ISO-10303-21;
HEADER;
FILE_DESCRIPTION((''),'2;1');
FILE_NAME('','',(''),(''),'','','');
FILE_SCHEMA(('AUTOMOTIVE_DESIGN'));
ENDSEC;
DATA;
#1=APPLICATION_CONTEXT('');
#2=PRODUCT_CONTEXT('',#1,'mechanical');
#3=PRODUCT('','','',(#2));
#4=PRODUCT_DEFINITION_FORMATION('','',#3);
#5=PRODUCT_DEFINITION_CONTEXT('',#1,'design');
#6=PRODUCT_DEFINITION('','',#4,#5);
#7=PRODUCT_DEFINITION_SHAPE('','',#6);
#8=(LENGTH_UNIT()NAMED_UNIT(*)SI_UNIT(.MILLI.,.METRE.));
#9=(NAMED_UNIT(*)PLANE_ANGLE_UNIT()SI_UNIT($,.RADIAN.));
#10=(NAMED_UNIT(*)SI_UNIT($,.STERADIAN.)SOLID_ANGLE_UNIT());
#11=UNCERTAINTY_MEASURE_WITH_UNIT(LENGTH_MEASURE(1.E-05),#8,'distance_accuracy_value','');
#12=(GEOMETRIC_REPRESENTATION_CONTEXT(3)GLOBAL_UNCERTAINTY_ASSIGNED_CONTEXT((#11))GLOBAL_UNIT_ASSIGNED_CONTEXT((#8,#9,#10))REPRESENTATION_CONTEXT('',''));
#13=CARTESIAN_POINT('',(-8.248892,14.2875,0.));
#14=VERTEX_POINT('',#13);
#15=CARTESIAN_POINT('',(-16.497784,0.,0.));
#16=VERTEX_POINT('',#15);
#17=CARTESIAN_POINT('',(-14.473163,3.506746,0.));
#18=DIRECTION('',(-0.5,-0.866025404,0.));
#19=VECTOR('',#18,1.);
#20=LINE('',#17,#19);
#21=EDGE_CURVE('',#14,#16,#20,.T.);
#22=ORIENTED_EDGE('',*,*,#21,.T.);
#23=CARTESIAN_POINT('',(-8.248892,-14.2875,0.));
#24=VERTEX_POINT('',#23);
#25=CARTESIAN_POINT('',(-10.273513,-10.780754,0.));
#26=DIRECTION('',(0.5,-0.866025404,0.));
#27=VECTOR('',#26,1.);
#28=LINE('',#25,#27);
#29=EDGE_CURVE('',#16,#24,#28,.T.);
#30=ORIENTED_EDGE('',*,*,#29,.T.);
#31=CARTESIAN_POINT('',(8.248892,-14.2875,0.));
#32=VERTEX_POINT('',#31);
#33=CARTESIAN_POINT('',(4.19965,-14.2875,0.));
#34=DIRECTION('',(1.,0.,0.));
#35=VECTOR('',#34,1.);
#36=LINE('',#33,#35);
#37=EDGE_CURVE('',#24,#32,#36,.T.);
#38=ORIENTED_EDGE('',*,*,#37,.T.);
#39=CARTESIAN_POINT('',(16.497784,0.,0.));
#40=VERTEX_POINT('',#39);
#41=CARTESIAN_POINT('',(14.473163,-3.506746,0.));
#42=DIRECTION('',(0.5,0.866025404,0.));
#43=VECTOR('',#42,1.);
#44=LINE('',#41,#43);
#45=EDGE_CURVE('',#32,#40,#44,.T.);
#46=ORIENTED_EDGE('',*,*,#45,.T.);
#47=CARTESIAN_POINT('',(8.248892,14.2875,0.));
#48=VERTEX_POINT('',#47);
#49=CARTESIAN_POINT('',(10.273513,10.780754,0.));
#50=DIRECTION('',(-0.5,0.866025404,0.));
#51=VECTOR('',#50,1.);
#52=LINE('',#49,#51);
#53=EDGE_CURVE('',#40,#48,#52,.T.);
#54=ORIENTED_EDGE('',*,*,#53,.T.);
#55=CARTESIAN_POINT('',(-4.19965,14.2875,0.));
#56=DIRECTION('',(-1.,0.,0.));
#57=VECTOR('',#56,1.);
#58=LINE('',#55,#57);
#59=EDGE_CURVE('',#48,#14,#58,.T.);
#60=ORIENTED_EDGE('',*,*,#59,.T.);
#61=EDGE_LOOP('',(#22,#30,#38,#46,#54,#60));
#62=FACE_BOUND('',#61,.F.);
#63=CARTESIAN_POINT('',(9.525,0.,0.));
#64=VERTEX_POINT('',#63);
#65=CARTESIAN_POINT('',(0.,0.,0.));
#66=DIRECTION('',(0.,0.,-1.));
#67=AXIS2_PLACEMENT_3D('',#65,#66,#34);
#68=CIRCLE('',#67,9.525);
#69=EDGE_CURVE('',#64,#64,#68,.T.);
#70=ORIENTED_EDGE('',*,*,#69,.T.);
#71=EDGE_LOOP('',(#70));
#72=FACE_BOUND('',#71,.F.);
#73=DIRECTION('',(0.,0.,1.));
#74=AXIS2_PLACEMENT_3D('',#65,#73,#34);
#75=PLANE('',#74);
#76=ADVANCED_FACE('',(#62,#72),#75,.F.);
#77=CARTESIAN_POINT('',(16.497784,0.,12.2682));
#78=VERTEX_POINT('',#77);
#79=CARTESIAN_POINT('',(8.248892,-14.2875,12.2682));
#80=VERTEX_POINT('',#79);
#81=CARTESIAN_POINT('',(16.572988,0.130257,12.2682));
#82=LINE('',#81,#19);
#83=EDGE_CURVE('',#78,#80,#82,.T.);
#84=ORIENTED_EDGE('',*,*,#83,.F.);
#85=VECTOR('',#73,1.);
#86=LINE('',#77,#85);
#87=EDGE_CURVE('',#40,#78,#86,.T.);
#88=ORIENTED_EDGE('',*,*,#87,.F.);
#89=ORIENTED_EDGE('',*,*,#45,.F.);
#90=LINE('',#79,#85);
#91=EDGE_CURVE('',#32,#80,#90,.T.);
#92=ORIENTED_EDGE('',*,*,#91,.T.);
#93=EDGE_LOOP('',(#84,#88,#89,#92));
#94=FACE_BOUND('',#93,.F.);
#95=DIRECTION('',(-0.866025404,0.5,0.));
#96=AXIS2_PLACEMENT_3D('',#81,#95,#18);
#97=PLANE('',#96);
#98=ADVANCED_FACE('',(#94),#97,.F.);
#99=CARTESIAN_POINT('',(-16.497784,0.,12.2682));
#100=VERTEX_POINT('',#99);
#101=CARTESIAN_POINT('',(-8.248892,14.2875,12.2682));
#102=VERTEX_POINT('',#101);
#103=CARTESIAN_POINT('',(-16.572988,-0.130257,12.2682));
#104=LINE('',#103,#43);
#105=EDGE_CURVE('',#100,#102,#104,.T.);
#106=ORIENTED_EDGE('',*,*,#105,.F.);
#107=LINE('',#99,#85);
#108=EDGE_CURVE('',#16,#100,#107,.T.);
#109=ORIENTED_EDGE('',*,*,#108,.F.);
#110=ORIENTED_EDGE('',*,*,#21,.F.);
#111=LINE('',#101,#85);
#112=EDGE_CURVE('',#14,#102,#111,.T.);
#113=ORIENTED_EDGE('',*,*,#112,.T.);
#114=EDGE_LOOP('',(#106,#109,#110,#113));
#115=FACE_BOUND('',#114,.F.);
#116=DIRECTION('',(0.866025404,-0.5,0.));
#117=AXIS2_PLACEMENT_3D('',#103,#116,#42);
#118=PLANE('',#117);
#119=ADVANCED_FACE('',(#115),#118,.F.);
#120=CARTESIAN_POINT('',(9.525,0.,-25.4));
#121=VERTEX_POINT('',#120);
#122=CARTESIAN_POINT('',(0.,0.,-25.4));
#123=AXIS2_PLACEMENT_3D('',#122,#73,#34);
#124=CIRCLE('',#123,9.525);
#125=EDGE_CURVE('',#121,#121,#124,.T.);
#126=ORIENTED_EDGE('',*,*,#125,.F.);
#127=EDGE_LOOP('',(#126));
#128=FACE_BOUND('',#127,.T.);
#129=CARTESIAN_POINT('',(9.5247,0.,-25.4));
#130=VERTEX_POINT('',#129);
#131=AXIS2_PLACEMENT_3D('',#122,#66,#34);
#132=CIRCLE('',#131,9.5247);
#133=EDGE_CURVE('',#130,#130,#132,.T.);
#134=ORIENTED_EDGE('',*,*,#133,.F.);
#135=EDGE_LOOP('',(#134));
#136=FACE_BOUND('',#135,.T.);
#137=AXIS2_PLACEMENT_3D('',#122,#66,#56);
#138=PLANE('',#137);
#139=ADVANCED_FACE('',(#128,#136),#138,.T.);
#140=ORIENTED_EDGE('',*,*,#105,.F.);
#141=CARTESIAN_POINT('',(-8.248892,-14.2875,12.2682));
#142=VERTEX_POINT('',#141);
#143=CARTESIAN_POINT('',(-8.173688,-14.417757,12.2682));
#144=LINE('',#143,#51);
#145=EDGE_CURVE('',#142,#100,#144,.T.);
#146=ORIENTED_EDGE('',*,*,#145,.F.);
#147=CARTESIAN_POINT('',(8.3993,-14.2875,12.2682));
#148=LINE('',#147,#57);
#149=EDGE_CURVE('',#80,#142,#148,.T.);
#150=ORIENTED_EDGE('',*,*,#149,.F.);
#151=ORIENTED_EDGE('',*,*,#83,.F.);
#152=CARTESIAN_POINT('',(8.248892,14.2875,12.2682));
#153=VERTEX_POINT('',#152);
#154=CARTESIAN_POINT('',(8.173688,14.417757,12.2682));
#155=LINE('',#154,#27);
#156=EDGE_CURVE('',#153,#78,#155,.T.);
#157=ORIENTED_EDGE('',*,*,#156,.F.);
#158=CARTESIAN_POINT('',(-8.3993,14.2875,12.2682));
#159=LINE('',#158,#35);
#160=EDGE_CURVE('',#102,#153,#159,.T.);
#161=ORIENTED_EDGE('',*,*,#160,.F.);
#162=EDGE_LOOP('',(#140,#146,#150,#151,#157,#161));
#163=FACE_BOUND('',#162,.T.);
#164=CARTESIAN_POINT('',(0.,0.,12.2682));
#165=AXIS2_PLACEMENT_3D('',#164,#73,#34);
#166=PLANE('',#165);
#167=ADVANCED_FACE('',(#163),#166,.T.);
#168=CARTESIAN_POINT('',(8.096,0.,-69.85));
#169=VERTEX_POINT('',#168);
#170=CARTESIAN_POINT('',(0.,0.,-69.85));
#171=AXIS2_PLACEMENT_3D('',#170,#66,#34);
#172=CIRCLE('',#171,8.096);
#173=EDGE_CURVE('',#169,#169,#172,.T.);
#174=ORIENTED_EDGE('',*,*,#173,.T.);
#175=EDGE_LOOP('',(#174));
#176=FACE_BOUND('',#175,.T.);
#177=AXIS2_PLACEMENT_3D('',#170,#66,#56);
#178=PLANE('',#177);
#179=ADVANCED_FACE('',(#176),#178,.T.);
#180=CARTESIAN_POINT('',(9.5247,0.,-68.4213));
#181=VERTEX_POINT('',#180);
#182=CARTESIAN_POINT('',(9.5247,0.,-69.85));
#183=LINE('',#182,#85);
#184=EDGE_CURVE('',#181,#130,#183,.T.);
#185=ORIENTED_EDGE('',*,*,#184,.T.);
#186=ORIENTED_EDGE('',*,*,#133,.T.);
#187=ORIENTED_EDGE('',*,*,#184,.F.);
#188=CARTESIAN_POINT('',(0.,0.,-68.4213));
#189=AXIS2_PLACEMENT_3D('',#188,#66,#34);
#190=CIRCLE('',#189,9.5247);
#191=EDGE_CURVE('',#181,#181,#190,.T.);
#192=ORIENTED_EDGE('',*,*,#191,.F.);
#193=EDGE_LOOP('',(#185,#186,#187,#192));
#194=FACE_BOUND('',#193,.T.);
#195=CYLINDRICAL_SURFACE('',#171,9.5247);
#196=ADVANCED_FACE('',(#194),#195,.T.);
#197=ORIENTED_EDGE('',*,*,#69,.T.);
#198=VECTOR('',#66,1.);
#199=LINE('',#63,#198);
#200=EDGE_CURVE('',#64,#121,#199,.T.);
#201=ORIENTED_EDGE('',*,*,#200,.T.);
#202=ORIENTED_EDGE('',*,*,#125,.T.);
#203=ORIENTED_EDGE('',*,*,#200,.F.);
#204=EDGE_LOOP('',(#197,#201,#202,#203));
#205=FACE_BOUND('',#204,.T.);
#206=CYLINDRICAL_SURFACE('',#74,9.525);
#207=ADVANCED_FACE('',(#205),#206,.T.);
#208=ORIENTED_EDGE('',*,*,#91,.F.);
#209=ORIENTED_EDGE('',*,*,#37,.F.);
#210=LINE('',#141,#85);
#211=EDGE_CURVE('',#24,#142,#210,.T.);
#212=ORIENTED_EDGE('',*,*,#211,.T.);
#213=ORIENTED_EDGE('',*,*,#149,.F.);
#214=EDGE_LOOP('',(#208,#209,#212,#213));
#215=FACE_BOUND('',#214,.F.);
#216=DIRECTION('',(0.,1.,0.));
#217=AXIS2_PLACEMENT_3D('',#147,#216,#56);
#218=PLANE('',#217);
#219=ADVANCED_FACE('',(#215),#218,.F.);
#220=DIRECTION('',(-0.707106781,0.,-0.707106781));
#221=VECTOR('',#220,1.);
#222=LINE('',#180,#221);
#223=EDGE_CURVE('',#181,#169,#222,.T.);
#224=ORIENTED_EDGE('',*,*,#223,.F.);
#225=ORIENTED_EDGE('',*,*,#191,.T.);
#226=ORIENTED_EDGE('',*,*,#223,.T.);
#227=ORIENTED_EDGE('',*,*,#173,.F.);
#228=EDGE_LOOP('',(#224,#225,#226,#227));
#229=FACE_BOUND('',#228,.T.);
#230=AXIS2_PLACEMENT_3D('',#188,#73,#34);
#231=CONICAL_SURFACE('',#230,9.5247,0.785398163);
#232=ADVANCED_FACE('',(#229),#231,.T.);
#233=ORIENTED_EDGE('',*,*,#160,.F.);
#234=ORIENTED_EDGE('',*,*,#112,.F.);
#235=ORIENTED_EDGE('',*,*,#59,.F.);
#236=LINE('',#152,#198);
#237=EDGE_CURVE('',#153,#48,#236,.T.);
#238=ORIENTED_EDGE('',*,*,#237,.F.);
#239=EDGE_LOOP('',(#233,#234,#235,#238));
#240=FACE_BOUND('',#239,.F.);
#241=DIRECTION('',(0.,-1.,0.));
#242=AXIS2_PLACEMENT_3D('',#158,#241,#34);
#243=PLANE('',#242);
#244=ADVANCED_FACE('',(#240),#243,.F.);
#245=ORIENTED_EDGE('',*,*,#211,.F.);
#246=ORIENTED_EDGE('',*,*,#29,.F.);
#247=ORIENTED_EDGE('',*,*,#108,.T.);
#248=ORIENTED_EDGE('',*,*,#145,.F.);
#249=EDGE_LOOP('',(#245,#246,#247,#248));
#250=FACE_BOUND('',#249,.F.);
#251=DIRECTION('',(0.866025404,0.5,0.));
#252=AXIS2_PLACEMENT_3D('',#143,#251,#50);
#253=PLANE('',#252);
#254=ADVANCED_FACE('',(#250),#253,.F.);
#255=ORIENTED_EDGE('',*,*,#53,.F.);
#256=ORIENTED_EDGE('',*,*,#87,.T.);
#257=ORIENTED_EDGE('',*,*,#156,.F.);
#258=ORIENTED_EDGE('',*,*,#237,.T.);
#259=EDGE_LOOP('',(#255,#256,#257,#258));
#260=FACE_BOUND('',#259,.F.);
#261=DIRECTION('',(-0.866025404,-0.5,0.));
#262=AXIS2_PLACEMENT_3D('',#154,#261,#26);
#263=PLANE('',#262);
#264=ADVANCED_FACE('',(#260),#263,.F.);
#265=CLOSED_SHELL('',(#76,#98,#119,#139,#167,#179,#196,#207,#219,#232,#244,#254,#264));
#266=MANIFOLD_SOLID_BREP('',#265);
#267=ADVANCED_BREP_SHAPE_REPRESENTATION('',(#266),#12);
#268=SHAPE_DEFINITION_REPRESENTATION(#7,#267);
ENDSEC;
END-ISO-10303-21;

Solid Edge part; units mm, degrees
sketch "Sketch1" plane through (0, 0, 0) normal (0, 0, 1) x (1, 0, 0)
  circle A0 centre (0, 0) radius 16.5735
  dimension "D1" = 33.147
extrude "Protrusion1" add sketch "Sketch1" along normal blind 12.2682
sketch "Sketch2" plane through (0, 0, 0) normal (0, 0, -1) x (1, 0, 0)
  circle A0 centre (0, 0) radius 9.525
extrude "Protrusion2" add sketch "Sketch2" along normal blind 69.85
sketch "Sketch3" plane through (0, 0, -69.85) normal (0, 0, -1) x (1, 0, 0)
  circle A0 centre (0, 0) radius 9.5247
extrude "Cutout1" cut sketch "Sketch3" against normal blind 44.45 flip side to cut
chamfer "Chamfer_1" distance 1.4287 angle 45 1 edges at (-9.5247, 0, -69.85)
sketch "Sketch4" plane through (0, 0, 12.2682) normal (0, 0, 1) x (1, 0, 0)
  line L0 (-8.3993, 14.2875) -> (8.3993, 14.2875)
  dimension "D1" = 28.575
extrude "Cutout2" cut sketch "Sketch4" against normal up to next material side at (0, 14.3375, 12.2682)
pattern_circular "Pattern1" count 6 over 360 about axis through (0, 0, 12.2682) along (0, 0, 1) of "Cutout2"
properties part number "203263"
